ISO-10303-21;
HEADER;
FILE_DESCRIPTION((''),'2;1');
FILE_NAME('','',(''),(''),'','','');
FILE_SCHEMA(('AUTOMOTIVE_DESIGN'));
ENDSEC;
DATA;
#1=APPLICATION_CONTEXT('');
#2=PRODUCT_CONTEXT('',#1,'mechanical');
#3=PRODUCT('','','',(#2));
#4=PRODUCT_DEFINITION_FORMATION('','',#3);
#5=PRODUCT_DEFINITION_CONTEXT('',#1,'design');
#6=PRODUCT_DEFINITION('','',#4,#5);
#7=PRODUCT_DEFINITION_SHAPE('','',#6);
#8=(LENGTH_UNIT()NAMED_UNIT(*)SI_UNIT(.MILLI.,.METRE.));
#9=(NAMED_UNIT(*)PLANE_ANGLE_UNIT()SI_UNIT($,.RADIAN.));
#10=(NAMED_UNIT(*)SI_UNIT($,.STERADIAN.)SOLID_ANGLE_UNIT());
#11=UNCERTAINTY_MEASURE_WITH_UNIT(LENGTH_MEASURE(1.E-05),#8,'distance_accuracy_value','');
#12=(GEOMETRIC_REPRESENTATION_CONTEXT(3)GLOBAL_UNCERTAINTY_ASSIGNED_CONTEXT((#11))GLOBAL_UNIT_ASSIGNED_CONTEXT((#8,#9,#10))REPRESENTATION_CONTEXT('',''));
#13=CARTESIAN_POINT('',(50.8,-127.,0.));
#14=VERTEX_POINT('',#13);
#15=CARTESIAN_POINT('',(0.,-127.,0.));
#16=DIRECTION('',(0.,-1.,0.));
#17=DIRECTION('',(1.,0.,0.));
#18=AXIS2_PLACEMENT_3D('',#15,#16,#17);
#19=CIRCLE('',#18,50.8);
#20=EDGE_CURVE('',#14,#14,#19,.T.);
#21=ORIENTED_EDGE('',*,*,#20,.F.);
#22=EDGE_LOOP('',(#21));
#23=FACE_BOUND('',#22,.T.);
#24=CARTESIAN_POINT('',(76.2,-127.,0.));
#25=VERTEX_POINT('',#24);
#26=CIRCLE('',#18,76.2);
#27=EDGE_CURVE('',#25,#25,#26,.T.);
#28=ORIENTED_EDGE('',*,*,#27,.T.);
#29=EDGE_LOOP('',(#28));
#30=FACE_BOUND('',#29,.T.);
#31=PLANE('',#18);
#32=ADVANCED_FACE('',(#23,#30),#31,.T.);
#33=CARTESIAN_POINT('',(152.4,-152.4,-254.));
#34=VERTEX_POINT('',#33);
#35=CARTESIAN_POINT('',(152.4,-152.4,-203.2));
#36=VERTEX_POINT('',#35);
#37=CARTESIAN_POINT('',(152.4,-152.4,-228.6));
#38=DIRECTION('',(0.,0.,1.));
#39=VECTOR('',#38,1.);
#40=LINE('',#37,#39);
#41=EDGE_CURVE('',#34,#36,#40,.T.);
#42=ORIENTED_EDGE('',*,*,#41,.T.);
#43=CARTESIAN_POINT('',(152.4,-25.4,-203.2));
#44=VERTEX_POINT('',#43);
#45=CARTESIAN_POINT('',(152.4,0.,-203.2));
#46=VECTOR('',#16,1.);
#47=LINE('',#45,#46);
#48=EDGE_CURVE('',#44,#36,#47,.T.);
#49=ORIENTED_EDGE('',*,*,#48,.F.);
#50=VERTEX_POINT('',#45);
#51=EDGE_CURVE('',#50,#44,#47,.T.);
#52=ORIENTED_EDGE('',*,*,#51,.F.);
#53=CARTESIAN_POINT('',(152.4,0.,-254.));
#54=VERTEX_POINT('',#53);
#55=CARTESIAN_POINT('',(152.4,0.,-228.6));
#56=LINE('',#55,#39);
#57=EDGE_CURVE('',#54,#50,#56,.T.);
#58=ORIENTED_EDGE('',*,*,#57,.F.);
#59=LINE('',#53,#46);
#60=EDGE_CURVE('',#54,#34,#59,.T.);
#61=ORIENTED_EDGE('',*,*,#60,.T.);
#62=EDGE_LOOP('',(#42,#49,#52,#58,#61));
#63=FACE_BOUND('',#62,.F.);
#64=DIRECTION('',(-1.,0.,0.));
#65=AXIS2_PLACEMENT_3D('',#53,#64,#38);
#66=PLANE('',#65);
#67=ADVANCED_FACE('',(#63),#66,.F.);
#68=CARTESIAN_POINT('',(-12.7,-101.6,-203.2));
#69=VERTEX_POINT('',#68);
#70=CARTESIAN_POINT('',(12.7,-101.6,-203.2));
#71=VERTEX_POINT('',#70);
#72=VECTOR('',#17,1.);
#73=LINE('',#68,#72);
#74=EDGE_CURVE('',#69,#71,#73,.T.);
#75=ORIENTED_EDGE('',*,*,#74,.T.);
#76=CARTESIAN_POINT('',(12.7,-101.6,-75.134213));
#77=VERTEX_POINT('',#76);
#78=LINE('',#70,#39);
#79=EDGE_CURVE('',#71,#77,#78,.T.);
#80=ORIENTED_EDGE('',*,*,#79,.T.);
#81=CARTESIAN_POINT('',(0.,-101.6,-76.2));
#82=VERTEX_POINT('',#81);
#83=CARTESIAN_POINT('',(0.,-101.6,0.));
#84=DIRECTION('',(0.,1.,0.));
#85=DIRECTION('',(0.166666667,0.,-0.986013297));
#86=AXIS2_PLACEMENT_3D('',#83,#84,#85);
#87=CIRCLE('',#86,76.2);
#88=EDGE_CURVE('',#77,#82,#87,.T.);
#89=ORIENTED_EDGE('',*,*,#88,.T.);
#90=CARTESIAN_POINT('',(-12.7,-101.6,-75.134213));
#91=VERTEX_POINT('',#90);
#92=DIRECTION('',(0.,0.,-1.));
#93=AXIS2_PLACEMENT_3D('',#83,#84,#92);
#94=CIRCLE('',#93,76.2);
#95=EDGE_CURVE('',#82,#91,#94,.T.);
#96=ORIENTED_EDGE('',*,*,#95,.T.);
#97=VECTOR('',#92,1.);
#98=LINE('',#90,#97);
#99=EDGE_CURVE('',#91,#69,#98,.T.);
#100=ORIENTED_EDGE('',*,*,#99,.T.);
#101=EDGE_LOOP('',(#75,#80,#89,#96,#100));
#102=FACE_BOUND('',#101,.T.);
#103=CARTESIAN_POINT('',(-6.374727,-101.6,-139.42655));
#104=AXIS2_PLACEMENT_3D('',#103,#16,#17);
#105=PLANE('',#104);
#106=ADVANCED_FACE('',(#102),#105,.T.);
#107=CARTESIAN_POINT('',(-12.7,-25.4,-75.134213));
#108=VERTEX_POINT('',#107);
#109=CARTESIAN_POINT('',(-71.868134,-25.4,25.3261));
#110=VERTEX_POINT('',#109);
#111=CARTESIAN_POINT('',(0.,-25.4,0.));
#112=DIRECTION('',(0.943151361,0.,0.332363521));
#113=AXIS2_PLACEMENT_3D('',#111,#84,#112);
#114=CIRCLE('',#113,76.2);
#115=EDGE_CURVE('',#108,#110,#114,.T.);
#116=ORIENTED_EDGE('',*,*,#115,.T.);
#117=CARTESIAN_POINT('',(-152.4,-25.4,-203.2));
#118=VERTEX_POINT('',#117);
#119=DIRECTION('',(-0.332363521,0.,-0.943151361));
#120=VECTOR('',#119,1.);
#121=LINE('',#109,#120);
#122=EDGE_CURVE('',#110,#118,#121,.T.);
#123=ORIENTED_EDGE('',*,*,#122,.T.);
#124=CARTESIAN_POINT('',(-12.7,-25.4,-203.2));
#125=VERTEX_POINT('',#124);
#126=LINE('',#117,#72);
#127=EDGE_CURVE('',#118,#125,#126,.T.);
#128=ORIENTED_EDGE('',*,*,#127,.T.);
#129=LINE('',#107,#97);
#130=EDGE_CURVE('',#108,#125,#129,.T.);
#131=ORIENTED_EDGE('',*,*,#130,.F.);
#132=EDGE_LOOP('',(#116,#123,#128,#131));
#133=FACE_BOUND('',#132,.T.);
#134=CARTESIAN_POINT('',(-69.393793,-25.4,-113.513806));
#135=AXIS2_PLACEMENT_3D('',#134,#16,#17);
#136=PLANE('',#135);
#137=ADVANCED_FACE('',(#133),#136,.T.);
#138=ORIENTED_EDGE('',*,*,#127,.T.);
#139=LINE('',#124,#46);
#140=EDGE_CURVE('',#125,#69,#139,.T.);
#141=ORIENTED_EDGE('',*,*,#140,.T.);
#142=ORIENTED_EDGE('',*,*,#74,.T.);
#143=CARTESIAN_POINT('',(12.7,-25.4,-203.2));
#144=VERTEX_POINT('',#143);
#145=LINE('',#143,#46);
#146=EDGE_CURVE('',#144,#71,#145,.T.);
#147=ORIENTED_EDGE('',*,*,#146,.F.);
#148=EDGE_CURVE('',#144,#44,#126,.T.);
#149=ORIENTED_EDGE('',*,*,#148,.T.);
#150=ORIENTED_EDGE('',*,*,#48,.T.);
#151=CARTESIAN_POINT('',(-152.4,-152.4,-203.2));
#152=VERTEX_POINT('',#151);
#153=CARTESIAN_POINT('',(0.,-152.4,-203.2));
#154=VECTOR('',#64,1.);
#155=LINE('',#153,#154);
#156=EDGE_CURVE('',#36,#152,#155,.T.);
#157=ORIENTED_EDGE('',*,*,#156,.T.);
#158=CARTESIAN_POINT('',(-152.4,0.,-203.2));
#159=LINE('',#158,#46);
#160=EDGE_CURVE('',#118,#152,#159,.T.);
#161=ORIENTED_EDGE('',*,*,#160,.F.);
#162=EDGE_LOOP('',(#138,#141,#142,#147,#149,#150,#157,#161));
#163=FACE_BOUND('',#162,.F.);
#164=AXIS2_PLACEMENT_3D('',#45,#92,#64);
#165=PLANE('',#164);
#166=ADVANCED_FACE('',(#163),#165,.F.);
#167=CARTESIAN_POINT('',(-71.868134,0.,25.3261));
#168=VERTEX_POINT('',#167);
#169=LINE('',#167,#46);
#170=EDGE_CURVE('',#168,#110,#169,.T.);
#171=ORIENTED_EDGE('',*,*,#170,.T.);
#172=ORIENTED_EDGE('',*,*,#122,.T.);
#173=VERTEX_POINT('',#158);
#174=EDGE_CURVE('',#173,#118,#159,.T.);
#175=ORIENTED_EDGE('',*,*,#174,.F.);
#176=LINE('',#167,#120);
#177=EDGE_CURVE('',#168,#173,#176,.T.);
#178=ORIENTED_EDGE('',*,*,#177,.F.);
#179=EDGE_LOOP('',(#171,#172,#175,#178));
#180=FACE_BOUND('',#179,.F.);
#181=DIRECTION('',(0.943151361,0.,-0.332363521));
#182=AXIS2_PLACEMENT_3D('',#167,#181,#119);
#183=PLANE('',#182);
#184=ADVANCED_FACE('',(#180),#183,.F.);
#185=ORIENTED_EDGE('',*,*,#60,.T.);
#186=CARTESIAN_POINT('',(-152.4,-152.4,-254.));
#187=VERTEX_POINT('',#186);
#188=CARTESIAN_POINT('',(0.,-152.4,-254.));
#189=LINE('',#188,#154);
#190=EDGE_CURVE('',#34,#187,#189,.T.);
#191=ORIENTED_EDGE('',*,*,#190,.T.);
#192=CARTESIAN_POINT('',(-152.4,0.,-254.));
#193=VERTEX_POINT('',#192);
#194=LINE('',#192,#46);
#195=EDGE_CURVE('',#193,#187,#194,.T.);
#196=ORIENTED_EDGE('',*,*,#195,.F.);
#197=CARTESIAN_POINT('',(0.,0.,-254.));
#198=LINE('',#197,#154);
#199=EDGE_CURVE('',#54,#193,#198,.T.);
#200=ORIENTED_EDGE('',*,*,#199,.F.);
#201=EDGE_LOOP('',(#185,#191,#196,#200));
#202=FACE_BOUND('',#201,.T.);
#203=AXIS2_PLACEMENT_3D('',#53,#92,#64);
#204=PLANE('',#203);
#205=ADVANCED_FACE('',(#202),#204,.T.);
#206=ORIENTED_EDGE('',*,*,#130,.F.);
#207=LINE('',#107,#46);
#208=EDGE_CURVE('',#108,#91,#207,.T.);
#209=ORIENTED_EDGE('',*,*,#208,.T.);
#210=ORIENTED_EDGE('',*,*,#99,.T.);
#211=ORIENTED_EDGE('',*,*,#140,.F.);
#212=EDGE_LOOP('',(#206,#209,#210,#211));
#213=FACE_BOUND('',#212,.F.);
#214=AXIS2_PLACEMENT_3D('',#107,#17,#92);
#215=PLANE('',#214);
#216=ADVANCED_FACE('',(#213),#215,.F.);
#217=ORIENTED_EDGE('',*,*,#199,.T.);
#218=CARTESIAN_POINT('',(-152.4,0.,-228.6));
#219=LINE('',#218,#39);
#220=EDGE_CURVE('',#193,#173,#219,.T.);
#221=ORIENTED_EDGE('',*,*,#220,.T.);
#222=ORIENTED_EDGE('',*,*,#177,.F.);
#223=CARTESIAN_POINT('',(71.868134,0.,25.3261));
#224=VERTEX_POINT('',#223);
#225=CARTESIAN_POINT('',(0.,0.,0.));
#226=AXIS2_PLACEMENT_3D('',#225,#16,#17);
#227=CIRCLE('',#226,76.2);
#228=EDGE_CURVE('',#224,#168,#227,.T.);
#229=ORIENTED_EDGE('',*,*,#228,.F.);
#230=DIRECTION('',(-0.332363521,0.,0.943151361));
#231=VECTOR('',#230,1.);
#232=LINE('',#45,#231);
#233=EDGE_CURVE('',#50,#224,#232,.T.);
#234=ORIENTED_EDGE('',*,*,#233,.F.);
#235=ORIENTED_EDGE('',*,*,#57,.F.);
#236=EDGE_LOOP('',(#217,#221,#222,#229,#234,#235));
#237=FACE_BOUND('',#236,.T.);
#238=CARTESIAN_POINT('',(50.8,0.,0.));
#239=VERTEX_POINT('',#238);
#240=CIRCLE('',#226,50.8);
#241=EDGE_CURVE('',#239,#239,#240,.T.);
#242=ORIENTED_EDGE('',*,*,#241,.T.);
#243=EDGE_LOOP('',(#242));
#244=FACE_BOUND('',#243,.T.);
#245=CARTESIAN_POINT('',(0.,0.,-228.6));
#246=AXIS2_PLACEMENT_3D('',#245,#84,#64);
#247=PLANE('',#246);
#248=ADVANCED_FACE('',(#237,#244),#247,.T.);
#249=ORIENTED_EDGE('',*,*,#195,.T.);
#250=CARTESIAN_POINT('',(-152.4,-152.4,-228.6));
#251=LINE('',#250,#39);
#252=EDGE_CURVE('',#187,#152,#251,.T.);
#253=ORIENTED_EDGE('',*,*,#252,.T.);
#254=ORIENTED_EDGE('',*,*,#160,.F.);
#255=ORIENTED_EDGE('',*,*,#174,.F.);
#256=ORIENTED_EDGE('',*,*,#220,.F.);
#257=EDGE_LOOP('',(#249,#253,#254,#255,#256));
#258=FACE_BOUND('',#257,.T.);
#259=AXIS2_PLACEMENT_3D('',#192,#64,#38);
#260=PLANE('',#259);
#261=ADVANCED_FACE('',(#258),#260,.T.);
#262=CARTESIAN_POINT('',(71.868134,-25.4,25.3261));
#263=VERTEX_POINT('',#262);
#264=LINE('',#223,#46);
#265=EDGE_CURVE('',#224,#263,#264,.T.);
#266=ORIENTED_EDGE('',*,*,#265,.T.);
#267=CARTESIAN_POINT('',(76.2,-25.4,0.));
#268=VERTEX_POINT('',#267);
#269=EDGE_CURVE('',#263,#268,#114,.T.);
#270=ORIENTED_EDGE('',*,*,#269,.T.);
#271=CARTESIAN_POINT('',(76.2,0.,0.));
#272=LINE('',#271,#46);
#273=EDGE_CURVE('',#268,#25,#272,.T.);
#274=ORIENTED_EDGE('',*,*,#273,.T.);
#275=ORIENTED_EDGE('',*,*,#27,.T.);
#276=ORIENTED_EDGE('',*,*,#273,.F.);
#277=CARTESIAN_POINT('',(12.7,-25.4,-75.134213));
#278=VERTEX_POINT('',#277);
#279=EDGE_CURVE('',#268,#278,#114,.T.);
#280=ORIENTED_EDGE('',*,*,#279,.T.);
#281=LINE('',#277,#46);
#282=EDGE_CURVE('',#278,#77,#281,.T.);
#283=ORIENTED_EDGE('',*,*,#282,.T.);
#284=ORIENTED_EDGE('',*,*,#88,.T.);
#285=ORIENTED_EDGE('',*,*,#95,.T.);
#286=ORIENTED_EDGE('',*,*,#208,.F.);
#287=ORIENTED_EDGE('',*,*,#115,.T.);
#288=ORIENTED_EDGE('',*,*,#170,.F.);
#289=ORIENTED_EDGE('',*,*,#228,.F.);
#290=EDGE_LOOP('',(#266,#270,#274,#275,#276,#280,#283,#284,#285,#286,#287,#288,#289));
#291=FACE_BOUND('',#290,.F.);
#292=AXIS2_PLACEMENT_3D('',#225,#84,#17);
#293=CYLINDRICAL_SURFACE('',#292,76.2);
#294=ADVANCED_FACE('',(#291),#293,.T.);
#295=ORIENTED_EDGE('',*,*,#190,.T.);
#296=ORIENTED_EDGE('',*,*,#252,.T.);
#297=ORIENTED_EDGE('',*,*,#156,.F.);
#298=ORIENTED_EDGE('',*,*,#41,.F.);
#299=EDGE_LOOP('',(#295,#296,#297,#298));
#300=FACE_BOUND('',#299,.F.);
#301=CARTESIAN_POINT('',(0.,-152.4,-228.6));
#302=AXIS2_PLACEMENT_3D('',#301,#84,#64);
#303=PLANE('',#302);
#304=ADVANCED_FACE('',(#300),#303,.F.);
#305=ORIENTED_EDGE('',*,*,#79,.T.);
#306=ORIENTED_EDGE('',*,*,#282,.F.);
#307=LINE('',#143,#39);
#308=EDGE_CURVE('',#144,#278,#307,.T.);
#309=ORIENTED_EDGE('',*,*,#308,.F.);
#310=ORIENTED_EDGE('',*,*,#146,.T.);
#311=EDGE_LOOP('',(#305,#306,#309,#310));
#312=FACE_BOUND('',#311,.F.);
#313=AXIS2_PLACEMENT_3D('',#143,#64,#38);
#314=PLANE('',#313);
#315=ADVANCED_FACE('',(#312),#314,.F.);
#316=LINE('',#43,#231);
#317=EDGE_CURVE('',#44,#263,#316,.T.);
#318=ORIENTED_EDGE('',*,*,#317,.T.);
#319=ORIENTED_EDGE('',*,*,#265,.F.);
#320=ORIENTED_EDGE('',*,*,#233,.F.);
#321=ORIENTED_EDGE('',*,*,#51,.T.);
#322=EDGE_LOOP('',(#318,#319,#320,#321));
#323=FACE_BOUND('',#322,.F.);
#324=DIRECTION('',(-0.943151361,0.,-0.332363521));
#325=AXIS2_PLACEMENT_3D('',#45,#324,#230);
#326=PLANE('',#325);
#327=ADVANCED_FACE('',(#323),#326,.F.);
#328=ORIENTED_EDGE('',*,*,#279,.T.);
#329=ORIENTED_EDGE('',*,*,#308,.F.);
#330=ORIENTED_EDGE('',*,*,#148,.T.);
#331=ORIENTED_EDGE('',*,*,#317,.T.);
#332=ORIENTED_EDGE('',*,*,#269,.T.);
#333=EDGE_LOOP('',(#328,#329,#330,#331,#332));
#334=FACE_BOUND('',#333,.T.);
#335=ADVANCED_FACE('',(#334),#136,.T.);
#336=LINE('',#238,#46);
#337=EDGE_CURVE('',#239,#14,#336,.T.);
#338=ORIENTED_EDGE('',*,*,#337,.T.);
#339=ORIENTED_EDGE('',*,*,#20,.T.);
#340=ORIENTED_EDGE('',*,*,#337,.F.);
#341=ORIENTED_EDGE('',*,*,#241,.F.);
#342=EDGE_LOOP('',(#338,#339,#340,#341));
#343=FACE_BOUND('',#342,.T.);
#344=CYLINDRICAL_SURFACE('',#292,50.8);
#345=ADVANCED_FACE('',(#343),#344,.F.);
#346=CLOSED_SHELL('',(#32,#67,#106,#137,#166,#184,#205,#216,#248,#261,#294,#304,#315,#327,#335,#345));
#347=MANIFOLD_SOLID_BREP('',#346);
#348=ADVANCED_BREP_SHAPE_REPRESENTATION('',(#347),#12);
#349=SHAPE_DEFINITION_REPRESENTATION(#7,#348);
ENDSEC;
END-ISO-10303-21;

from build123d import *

# Parameters (mm, degrees)
F0_R     = 76.2
F0_R_2   = 50.8
F1_DEPTH = 127
F3_DEPTH = 25.4
F4_W     = 304.8
F4_H     = 50.8
F5_DEPTH = 152.4
F7_DEPTH = 76.2


with BuildPart() as f1:
    # F0 (on Front) → F1 (new body)
    with BuildSketch(Plane.XZ):
        Circle(F0_R)
        Circle(F0_R_2, mode=Mode.SUBTRACT)
    extrude(amount=F1_DEPTH)

    # F2 (on Front) → F3 (join)
    with BuildSketch(Plane.XZ):
        with BuildLine():
            ThreePointArc((0, -76.2), (-62.1944082776, -44.0260783968), (-71.8681337184, 25.3261002888))
            Line((-71.8681337184, 25.3261002888), (-152.4, -203.2))
            Line((-152.4, -203.2), (0, -203.2))
            Line((0, -203.2), (0, -76.2))
        make_face()
        with BuildLine():
            ThreePointArc((71.8681337184, 25.3261002888), (62.1944082776, -44.0260783968), (0, -76.2))
            Line((0, -76.2), (0, -203.2))
            Line((0, -203.2), (152.4, -203.2))
            Line((152.4, -203.2), (71.8681337184, 25.3261002888))
        make_face()
    extrude(amount=F3_DEPTH)

    # F4 (on face) → F5 (join)
    with BuildSketch(Plane(origin=(0, 0, 0), x_dir=(-1, 0, 0), z_dir=(0, 1, 0))):
        with Locations((0, -228.6)):
            Rectangle(F4_W, F4_H)
    extrude(amount=-F5_DEPTH)

    # F6 (on face) → F7 (join)
    with BuildSketch(Plane.XZ.offset(25.4)):
        with BuildLine():
            Line((0, -203.2), (0, -76.2))
            ThreePointArc((0, -76.2), (-6.3723210333, -75.9330858365), (-12.7, -75.1342132454))
            Line((-12.7, -75.1342132454), (-12.7, -203.2))
            Line((-12.7, -203.2), (0, -203.2))
        make_face()
        with BuildLine():
            ThreePointArc((12.7, -75.1342132454), (6.3723210333, -75.9330858365), (0, -76.2))
            Line((0, -76.2), (0, -203.2))
            Line((0, -203.2), (12.7, -203.2))
            Line((12.7, -203.2), (12.7, -75.1342132454))
        make_face()
    extrude(amount=F7_DEPTH)


solid = f1.part
